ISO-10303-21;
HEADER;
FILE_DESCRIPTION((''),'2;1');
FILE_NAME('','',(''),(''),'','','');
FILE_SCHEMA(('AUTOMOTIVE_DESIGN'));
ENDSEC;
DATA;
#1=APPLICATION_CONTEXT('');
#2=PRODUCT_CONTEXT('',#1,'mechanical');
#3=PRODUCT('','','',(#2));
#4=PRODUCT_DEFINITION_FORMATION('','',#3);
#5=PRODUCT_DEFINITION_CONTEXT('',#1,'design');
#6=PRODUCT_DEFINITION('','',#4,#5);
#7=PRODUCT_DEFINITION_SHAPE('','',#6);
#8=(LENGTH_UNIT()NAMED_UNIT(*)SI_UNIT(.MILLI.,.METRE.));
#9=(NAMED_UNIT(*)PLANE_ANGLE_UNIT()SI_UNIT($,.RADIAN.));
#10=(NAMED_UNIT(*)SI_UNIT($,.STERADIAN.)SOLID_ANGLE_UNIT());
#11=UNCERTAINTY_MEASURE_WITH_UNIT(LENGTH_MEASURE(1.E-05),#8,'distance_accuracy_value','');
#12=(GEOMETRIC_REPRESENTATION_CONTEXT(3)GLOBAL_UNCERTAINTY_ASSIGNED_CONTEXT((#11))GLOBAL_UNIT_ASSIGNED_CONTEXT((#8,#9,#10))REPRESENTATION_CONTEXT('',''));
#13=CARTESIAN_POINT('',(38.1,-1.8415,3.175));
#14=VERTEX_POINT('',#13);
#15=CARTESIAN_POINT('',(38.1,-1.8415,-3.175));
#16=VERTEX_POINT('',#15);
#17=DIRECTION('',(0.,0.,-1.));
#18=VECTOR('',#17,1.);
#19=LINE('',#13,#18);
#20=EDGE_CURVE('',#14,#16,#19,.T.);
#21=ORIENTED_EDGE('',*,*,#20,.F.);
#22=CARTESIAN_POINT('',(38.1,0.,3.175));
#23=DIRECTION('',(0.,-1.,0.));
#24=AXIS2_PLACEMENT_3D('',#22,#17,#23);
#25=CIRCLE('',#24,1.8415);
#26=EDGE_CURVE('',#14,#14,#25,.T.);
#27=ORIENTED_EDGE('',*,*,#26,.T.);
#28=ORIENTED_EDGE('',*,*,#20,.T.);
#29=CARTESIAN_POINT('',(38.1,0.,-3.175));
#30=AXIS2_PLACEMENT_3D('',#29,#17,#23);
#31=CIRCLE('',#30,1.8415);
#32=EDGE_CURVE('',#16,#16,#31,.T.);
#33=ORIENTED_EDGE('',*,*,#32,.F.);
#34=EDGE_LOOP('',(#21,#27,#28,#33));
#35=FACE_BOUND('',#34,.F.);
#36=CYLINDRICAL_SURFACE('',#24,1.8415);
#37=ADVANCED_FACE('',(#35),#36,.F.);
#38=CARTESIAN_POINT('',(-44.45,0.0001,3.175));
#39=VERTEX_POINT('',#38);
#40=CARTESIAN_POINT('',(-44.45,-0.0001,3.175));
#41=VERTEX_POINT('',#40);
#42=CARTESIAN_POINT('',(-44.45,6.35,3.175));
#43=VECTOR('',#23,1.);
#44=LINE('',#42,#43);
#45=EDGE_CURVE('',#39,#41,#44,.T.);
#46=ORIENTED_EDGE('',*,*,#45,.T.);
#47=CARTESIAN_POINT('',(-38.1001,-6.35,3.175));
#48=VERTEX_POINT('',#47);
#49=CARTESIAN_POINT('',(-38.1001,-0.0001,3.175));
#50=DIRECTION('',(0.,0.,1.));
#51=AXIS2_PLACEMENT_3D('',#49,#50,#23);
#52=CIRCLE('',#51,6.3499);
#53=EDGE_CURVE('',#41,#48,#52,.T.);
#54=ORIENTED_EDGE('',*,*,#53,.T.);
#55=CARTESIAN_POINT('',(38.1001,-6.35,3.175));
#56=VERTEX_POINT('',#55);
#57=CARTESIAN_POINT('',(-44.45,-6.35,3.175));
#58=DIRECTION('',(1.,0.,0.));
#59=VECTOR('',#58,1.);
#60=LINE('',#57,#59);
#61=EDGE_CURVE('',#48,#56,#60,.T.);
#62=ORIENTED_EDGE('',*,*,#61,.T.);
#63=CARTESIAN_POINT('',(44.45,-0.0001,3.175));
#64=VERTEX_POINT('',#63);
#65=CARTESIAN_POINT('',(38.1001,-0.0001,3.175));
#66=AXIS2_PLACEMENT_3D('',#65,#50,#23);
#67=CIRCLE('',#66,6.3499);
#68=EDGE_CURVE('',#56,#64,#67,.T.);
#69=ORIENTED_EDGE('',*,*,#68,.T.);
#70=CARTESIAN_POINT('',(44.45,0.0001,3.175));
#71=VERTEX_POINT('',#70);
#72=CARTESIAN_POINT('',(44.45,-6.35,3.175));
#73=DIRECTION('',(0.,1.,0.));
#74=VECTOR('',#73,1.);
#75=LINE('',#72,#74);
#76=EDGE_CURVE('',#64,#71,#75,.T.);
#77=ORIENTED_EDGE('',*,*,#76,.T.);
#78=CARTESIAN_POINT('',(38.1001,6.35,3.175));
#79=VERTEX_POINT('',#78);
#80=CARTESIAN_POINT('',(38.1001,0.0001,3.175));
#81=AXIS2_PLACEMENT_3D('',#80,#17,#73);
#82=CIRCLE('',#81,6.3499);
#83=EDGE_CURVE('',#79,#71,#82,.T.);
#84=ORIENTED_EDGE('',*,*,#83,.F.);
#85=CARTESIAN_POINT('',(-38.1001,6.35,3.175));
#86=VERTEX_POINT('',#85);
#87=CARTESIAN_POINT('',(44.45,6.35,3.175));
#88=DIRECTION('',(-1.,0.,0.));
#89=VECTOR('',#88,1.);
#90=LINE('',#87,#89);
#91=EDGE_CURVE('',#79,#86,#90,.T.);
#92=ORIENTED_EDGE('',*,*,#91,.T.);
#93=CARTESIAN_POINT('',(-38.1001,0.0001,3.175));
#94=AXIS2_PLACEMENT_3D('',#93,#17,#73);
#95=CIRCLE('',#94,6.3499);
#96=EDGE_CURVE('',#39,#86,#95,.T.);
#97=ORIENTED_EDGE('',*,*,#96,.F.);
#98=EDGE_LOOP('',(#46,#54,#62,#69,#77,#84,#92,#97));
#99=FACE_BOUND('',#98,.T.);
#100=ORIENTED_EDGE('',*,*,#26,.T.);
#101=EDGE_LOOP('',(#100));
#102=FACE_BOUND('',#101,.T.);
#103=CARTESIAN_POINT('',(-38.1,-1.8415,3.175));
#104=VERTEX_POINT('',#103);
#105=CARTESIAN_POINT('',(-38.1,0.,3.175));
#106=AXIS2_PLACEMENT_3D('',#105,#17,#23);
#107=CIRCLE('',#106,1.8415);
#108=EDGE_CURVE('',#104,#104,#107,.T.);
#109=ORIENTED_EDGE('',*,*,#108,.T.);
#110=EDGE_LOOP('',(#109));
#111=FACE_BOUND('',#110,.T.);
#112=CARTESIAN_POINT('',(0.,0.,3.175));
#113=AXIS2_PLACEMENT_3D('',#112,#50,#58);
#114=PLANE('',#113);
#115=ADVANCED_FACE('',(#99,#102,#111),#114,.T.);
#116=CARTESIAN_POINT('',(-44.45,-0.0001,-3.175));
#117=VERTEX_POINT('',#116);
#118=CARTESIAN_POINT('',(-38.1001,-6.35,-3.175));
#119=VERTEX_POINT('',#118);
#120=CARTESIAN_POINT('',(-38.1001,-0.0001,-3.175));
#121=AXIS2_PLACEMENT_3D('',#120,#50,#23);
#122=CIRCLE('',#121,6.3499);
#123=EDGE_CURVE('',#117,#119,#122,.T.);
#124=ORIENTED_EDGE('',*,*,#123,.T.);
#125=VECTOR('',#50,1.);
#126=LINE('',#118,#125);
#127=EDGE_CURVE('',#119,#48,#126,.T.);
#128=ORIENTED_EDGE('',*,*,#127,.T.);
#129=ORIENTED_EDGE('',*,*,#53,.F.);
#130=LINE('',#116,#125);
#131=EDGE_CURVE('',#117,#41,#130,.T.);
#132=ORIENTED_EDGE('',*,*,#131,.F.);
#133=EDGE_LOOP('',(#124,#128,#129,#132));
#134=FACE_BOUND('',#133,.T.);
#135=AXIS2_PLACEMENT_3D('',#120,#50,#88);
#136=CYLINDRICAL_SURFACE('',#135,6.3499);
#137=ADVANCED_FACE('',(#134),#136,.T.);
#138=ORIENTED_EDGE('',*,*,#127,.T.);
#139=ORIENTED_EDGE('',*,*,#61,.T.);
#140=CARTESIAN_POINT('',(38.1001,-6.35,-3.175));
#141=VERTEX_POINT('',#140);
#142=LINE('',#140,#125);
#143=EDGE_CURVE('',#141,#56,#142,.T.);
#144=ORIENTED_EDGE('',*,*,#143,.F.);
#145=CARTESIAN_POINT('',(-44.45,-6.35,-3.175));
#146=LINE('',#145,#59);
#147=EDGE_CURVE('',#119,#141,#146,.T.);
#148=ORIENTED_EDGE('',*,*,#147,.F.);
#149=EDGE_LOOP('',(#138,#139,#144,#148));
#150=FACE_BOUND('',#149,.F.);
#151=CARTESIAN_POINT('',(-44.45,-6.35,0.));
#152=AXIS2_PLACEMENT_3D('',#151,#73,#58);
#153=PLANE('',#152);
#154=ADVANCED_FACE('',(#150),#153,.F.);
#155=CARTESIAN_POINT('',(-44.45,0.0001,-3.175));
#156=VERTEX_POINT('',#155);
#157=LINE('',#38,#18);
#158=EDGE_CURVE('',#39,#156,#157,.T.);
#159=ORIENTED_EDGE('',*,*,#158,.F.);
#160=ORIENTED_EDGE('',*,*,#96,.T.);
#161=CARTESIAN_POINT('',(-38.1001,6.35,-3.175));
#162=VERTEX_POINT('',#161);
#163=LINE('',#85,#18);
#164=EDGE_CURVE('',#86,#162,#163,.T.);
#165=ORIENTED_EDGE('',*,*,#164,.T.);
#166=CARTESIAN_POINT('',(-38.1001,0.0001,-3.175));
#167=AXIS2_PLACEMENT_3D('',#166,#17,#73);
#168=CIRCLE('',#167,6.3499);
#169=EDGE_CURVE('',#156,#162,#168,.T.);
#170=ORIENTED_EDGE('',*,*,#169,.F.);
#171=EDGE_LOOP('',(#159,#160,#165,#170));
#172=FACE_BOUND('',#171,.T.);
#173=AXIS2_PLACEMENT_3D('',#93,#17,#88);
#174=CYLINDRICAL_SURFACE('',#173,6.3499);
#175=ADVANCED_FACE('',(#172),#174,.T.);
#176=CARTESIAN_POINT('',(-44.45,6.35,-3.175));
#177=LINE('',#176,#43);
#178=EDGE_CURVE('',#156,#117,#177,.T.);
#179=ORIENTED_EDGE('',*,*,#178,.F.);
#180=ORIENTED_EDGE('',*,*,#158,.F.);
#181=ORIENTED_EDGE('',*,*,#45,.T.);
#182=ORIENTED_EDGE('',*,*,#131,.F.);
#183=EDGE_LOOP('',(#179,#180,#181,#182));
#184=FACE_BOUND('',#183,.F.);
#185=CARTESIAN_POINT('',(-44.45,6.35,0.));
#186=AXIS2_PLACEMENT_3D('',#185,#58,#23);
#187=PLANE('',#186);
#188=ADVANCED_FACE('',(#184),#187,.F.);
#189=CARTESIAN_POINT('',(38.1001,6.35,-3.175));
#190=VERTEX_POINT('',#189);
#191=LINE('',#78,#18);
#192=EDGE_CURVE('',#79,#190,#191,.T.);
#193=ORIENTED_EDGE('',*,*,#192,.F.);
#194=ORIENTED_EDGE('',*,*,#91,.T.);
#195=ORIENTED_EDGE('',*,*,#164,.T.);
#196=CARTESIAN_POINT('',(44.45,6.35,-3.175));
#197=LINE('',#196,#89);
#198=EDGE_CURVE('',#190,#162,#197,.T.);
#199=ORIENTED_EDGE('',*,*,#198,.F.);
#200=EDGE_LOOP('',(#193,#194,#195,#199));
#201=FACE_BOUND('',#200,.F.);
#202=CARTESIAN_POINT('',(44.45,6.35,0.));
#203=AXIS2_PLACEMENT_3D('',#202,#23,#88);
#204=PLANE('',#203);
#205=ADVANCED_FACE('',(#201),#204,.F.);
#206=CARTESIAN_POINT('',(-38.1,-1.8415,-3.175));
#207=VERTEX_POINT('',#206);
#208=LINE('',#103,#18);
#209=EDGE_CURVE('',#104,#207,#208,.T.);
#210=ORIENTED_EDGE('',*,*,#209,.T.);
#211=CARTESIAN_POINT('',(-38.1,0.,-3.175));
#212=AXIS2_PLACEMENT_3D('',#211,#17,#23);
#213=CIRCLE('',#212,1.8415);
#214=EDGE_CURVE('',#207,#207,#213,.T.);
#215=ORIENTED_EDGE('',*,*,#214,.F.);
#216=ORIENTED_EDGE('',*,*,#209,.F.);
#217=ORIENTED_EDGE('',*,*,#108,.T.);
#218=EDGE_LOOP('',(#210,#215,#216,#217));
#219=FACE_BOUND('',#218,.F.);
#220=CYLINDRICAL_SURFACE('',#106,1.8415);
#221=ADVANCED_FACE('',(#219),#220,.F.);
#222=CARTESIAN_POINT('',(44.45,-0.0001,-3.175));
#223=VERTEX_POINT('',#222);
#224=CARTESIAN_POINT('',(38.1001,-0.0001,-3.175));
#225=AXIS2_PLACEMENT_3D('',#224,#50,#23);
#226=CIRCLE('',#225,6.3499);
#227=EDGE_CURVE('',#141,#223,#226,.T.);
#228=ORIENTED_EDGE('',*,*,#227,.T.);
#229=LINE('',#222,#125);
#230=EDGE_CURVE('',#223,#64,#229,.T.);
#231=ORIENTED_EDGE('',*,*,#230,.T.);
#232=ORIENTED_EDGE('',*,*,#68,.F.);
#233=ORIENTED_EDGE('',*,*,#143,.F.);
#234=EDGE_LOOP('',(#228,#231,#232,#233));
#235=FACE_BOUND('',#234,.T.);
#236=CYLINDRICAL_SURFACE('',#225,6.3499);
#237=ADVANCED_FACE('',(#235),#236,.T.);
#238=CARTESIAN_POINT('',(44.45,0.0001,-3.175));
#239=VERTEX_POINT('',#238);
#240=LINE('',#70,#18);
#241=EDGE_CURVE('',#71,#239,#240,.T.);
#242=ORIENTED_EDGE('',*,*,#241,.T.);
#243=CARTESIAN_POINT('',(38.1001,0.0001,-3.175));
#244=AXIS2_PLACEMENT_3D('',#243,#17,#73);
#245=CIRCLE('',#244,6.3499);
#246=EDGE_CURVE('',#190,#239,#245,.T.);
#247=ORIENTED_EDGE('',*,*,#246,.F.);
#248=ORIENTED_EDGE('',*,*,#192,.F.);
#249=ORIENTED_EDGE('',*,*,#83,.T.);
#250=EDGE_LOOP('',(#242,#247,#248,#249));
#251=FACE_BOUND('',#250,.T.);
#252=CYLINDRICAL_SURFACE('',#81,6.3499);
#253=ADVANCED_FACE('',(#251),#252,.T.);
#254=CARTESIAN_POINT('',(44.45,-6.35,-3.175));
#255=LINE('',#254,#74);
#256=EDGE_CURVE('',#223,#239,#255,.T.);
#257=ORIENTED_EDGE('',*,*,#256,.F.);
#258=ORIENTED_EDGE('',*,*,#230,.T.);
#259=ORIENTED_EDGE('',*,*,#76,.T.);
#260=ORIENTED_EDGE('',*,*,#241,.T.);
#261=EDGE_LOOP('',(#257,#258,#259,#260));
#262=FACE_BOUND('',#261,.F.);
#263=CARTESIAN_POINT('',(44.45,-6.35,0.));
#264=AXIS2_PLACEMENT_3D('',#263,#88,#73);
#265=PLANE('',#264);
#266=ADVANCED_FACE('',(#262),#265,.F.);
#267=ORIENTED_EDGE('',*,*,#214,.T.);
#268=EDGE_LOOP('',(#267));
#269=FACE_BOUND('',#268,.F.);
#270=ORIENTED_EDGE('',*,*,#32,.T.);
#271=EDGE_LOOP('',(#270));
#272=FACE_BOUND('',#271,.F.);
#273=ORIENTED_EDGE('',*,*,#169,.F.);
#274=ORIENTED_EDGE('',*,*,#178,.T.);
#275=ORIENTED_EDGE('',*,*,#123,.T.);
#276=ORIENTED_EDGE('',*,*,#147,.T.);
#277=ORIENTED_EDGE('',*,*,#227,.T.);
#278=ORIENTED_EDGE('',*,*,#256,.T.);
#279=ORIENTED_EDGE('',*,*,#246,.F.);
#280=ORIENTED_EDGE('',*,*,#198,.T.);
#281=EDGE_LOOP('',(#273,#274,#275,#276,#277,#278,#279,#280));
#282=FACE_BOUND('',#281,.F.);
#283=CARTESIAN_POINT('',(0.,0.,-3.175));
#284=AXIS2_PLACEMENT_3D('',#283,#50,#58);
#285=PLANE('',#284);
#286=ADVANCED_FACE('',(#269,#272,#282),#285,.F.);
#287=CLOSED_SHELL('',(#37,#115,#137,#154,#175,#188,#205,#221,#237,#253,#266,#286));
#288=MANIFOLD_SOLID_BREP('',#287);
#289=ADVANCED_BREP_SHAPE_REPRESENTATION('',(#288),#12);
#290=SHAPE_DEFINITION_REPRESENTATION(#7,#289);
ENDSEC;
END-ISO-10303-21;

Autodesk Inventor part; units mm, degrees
ref_plane "YZ Plane" through (0, 0, 0) normal (1, 0, 0) x (0, 1, 0)
ref_plane "XZ Plane" through (0, 0, 0) normal (0, 1, 0) x (-1, 0, 0)
ref_plane "XY Plane" through (0, 0, 0) normal (0, 0, 1) x (1, 0, 0)
sketch "Sketch1" plane through (0, 0, 0) normal (0, 0, 1) x (1, 0, 0)
  line L0 (-44.45, -6.35) -> (44.45, -6.35)
  line L1 (44.45, -6.35) -> (44.45, 6.35)
  line L2 (44.45, 6.35) -> (-44.45, 6.35)
  line L3 (-44.45, 6.35) -> (-44.45, -6.35)
  line L4 (-44.45, -6.35) -> (44.45, 6.35) construction
  line L5 (44.45, -6.35) -> (-44.45, 6.35) construction
  point P0 (0, 0)
  dimension "d0" = 88.9
  dimension "d1" = 12.7
extrude "Plate1" add sketch "Sketch1" along normal mid plane 6.35
fillet "Corner Round1" radius 6.35 4 edges at (-44.45, -6.35, 0) (-44.45, 6.35, 0) (44.45, 6.35, 0) (44.45, -6.35, 0)
sketch "Sketch4" plane through (0, 0, 3.175) normal (0, 0, 1) x (1, 0, 0)
  arc A0 (-38.1, 6.35) -> (-38.1, -6.35) centre (-38.1, 0) ccw construction
  arc A1 (38.1, -6.35) -> (38.1, 6.35) centre (38.1, 0) ccw construction
  point P0 (0, 0)
hole "Hole1" at (-38.1, 0, 3.175) at (38.1, 0, 3.175) direction (0, 0, -1) diameter 3.683 end through all thread size "10-24 UNC" class "2B" standard "ANSI Unified Screw Threads"
equation "\"d29\" = Thickness"
equation "\"d2\" = Thickness"
equation "\"BendRadius\" = Thickness"
equation "\"BendReliefWidth\" = Thickness"
equation "\"BendReliefDepth\" = 0.5 * Thickness"
equation "\"CornerReliefSize\" = 4 * Thickness"
equation "\"MinimumRemnant\" = 2 * Thickness"
equation "\"TransitionRadius\" = BendRadius"
equation "\"JacobiRadiusSize\" = BendRadius"
equation "\"GapSize\" = Thickness"
equation "\"Thickness\" = 6.35"
properties part number "MOUNT,STRAP,BATTERY" material "Aluminum 7075"
